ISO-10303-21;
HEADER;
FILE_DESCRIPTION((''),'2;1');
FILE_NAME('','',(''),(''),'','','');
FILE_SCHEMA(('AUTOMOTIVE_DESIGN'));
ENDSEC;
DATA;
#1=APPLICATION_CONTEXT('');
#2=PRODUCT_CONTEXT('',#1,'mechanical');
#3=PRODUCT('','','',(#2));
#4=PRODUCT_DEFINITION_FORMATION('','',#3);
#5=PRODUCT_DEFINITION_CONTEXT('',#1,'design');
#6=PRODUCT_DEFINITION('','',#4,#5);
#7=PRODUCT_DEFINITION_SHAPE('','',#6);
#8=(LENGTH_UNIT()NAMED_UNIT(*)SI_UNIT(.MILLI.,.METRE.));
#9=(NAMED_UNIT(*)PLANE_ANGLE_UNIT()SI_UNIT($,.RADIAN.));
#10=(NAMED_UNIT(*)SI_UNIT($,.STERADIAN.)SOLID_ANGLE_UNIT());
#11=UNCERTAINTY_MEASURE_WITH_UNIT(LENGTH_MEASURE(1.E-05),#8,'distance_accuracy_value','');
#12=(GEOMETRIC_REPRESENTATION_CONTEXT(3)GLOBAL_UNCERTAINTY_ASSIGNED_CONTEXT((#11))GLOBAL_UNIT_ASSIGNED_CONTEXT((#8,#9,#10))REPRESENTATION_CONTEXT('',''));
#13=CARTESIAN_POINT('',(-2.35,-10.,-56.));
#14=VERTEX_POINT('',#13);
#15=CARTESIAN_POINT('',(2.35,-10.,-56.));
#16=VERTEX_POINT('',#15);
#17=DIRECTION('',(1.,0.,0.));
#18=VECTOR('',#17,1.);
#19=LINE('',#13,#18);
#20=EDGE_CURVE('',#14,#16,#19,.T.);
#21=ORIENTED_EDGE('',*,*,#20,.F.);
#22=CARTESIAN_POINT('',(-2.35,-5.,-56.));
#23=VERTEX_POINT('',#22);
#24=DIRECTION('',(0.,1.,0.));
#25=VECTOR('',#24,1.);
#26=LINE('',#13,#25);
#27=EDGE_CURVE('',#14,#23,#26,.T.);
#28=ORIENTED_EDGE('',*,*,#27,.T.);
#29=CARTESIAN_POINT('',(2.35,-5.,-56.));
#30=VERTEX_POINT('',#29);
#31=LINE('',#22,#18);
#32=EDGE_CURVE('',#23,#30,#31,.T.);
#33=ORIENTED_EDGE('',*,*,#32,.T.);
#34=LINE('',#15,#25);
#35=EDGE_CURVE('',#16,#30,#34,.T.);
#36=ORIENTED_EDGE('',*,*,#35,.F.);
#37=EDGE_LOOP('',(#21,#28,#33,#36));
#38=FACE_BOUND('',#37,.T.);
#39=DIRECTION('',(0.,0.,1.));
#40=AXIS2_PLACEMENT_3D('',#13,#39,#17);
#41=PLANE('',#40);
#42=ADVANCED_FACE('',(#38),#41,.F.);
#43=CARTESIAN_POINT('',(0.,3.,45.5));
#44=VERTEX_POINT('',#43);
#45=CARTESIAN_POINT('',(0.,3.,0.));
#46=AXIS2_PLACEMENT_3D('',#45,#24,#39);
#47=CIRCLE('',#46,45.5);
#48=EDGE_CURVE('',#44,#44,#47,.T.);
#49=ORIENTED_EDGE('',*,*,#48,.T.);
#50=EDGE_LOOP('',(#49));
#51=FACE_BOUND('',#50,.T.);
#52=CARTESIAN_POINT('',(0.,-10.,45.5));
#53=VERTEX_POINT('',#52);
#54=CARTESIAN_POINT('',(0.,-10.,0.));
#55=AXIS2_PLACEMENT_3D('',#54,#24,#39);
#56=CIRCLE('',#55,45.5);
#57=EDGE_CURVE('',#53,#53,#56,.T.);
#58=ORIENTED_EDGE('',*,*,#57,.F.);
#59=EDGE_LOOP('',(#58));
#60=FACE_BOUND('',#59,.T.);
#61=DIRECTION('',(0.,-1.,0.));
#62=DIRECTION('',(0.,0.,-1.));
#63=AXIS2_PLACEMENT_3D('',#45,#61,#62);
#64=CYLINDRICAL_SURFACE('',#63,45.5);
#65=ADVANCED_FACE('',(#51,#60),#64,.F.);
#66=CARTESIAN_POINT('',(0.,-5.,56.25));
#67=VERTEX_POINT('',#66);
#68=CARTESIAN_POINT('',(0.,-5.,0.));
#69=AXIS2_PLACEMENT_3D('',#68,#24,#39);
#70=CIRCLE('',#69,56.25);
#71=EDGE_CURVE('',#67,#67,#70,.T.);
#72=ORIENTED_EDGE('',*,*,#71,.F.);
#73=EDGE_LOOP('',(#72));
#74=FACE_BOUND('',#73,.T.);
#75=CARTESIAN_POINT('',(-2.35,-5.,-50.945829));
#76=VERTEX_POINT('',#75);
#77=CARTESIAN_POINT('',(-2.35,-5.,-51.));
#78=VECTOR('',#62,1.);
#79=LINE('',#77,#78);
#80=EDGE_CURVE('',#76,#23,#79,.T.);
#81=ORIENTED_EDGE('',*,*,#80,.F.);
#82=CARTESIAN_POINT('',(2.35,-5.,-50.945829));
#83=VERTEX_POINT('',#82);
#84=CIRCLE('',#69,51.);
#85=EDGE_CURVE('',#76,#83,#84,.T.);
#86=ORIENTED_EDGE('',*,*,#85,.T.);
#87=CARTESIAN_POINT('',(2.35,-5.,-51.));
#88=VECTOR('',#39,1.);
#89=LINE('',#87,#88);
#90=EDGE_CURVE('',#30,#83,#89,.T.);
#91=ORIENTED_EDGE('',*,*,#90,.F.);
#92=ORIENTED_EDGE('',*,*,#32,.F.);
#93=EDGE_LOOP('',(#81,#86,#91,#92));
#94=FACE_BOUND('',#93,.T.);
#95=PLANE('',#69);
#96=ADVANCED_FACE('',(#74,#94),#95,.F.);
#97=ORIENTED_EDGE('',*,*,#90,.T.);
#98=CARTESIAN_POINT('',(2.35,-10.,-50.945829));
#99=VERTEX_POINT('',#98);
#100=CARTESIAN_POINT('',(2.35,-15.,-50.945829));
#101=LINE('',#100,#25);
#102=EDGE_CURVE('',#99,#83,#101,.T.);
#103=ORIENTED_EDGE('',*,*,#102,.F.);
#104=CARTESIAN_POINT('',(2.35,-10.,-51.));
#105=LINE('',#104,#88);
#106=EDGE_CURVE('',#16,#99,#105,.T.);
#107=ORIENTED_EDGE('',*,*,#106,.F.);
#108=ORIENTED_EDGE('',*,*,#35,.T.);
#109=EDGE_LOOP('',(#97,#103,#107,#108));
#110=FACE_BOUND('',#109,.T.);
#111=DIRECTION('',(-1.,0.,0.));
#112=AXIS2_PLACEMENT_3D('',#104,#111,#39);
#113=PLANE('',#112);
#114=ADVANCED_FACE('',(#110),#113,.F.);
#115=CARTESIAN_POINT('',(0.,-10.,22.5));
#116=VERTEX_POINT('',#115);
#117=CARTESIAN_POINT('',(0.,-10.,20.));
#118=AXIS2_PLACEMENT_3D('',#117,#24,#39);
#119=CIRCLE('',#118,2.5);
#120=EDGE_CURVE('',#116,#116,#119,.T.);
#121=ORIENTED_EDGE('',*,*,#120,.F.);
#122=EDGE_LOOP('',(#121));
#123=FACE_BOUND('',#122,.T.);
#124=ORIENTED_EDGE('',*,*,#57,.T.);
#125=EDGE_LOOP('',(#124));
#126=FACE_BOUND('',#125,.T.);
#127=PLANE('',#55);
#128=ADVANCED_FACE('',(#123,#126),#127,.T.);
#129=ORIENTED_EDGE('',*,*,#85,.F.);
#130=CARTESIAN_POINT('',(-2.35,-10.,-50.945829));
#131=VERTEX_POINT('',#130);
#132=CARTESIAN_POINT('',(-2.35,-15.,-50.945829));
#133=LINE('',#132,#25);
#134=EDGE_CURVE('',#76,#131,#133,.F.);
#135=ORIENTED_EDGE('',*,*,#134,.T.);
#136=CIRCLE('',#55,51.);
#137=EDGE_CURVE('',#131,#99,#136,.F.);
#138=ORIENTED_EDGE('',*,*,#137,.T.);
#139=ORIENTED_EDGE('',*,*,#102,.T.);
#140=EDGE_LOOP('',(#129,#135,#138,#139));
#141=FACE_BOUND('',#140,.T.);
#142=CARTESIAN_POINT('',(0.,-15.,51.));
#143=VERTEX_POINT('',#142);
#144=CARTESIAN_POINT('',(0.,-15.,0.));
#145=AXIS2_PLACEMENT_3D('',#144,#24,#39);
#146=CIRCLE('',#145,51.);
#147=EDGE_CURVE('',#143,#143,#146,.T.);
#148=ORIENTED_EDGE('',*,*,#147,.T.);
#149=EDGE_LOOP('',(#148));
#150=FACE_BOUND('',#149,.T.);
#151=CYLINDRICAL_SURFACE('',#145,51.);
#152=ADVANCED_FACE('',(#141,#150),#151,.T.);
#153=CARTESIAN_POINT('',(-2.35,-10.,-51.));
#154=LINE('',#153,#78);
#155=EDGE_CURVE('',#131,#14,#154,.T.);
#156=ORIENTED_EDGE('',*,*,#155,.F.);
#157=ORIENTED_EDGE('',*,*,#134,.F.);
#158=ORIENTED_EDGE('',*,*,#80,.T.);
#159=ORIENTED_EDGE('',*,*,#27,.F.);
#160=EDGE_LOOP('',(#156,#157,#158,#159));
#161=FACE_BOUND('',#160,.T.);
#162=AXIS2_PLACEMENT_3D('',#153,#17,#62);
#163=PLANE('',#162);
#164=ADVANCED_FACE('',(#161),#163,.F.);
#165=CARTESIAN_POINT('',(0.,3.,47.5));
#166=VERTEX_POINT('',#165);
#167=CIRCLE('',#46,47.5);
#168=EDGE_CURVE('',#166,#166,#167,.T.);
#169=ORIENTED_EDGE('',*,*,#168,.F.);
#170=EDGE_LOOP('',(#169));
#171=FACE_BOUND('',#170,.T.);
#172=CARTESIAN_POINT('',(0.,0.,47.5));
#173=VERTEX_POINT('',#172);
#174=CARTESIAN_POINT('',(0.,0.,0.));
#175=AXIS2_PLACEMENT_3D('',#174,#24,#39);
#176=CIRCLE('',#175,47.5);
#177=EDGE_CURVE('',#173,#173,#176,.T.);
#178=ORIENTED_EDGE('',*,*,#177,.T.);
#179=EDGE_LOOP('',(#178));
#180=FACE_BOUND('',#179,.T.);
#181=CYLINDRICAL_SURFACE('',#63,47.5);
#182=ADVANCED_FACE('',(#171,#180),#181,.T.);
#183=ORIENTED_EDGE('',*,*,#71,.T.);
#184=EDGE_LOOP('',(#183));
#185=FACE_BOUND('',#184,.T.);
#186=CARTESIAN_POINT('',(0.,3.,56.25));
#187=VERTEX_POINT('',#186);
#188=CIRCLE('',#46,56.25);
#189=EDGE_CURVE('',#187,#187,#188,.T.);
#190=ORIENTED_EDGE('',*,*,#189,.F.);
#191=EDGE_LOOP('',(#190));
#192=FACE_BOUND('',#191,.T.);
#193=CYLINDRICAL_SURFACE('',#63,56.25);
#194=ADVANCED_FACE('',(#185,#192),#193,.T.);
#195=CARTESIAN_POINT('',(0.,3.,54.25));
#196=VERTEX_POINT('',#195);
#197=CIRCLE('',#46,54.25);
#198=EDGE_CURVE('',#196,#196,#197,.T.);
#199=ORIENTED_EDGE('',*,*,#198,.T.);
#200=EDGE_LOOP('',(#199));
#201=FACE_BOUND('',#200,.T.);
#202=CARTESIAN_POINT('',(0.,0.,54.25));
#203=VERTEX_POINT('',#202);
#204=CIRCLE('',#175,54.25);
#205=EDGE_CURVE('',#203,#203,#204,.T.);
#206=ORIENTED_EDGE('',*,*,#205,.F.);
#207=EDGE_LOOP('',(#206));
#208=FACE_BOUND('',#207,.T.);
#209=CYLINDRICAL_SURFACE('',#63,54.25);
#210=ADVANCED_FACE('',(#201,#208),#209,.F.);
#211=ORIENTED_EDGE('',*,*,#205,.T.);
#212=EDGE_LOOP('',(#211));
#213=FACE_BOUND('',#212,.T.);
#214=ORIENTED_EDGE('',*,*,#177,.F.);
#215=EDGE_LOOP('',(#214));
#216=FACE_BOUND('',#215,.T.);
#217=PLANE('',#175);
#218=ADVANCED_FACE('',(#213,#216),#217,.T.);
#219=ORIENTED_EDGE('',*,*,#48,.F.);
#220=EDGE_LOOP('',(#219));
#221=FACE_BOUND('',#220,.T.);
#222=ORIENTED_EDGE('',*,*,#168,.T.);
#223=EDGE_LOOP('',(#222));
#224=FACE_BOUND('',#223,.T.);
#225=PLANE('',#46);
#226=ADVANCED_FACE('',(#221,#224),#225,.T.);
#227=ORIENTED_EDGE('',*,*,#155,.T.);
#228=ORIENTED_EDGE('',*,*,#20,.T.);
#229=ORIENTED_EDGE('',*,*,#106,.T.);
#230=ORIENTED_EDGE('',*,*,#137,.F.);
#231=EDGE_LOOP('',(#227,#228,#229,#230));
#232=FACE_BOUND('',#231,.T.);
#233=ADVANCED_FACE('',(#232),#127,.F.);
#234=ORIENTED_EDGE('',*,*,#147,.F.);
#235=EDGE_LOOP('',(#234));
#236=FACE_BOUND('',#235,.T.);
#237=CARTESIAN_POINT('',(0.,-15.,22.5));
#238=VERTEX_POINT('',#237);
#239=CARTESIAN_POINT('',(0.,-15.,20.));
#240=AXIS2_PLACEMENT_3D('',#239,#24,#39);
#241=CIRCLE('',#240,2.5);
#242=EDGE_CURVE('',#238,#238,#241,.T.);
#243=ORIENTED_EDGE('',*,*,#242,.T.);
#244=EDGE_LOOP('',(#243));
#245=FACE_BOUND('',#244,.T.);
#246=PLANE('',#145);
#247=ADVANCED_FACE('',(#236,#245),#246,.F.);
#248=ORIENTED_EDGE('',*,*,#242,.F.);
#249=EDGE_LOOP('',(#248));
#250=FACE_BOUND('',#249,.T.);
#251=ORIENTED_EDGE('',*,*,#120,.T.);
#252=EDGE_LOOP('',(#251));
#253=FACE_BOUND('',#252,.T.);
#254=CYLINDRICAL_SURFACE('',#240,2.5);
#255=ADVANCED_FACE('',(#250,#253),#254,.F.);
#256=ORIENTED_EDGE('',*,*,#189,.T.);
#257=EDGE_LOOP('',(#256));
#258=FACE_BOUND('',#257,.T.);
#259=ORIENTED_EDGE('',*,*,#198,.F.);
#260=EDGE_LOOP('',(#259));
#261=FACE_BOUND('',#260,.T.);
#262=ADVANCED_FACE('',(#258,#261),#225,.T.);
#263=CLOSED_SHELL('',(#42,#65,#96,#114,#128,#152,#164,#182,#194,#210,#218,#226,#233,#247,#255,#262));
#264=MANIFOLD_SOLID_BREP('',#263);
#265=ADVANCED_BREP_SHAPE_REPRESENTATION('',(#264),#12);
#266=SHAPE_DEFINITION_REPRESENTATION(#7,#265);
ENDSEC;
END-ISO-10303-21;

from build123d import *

# Parameters (mm, degrees)
SKETCH1_R             = 56.25
SKETCH1_R_2           = 54.25
BOSS_EXTRUDE1_DEPTH   = 3
SKETCH1_R_3           = 47.5
SKETCH1_R_4           = 45.5
BOSS_EXTRUDE1_2_DEPTH = 3
SKETCH1_3_R           = 51
BOSS_EXTRUDE2_DEPTH   = 15
BOSS_EXTRUDE3_START   = -5
SKETCH1_4_R           = 56.25
BOSS_EXTRUDE3_DEPTH   = 5
BOSS_EXTRUDE4_DEPTH   = 5
CUT_EXTRUDE1_START    = -10
SKETCH1_5_R           = 45.5
CUT_EXTRUDE1_DEPTH    = 10
SKETCH3_R             = 2.5
CUT_EXTRUDE2_DEPTH    = 81.604745518


with BuildPart() as part:
    # Sketch1 → Boss-Extrude1 (new body)
    with BuildSketch(Plane(origin=(0, 0, 0), x_dir=(1, 0, 0), z_dir=(0, 1, 0))):
        Circle(SKETCH1_R)
        Circle(SKETCH1_R_2, mode=Mode.SUBTRACT)
    extrude(amount=BOSS_EXTRUDE1_DEPTH)



with BuildPart() as body_2:
    # Sketch1 → Boss-Extrude1 2 (new body)
    with BuildSketch(Plane(origin=(0, 0, 0), x_dir=(1, 0, 0), z_dir=(0, 1, 0))):
        Circle(SKETCH1_R_3)
        Circle(SKETCH1_R_4, mode=Mode.SUBTRACT)
    extrude(amount=BOSS_EXTRUDE1_2_DEPTH)


with BuildPart() as body_3:
    # Sketch1<3> → Boss-Extrude2 (new body)
    with BuildSketch(Plane(origin=(0, 0, 0), x_dir=(1, 0, 0), z_dir=(0, 1, 0))):
        Circle(SKETCH1_3_R)
    extrude(amount=-BOSS_EXTRUDE2_DEPTH)


with BuildPart() as part_1:
    add(part.part)

    add(body_2.part)  # Boss-Extrude3 merges body 2

    add(body_3.part)  # Boss-Extrude3 merges body 3
    # Sketch1<4> → Boss-Extrude3 (add)
    with BuildSketch(Plane(origin=(0, 0, 0), x_dir=(1, 0, 0), z_dir=(0, 1, 0)).offset(BOSS_EXTRUDE3_START)):
        Circle(SKETCH1_4_R)
    extrude(amount=BOSS_EXTRUDE3_DEPTH)

    # Sketch2 → Boss-Extrude4 (add)
    with BuildSketch(Plane.XZ.offset(5)):
        Polygon((-2.35, -51), (-2.35, -56), (2.35, -56), (2.35, -51), (2.35, -50), (-2.35, -50), align=None)
    extrude(amount=BOSS_EXTRUDE4_DEPTH)

    # Sketch1<5> → Cut-Extrude1 (cut)
    with BuildSketch(Plane(origin=(0, 0, 0), x_dir=(1, 0, 0), z_dir=(0, 1, 0)).offset(CUT_EXTRUDE1_START)):
        Circle(SKETCH1_5_R)
    extrude(amount=CUT_EXTRUDE1_DEPTH, mode=Mode.SUBTRACT)

    # Sketch3 → Cut-Extrude2 (cut, through all)
    with BuildSketch(Plane(origin=(0, -10, 0), x_dir=(1, 0, 0), z_dir=(0, 1, 0))):
        with Locations((0, -20)):
            Circle(SKETCH3_R)
    extrude(amount=-CUT_EXTRUDE2_DEPTH, mode=Mode.SUBTRACT)


solid = part_1.part
